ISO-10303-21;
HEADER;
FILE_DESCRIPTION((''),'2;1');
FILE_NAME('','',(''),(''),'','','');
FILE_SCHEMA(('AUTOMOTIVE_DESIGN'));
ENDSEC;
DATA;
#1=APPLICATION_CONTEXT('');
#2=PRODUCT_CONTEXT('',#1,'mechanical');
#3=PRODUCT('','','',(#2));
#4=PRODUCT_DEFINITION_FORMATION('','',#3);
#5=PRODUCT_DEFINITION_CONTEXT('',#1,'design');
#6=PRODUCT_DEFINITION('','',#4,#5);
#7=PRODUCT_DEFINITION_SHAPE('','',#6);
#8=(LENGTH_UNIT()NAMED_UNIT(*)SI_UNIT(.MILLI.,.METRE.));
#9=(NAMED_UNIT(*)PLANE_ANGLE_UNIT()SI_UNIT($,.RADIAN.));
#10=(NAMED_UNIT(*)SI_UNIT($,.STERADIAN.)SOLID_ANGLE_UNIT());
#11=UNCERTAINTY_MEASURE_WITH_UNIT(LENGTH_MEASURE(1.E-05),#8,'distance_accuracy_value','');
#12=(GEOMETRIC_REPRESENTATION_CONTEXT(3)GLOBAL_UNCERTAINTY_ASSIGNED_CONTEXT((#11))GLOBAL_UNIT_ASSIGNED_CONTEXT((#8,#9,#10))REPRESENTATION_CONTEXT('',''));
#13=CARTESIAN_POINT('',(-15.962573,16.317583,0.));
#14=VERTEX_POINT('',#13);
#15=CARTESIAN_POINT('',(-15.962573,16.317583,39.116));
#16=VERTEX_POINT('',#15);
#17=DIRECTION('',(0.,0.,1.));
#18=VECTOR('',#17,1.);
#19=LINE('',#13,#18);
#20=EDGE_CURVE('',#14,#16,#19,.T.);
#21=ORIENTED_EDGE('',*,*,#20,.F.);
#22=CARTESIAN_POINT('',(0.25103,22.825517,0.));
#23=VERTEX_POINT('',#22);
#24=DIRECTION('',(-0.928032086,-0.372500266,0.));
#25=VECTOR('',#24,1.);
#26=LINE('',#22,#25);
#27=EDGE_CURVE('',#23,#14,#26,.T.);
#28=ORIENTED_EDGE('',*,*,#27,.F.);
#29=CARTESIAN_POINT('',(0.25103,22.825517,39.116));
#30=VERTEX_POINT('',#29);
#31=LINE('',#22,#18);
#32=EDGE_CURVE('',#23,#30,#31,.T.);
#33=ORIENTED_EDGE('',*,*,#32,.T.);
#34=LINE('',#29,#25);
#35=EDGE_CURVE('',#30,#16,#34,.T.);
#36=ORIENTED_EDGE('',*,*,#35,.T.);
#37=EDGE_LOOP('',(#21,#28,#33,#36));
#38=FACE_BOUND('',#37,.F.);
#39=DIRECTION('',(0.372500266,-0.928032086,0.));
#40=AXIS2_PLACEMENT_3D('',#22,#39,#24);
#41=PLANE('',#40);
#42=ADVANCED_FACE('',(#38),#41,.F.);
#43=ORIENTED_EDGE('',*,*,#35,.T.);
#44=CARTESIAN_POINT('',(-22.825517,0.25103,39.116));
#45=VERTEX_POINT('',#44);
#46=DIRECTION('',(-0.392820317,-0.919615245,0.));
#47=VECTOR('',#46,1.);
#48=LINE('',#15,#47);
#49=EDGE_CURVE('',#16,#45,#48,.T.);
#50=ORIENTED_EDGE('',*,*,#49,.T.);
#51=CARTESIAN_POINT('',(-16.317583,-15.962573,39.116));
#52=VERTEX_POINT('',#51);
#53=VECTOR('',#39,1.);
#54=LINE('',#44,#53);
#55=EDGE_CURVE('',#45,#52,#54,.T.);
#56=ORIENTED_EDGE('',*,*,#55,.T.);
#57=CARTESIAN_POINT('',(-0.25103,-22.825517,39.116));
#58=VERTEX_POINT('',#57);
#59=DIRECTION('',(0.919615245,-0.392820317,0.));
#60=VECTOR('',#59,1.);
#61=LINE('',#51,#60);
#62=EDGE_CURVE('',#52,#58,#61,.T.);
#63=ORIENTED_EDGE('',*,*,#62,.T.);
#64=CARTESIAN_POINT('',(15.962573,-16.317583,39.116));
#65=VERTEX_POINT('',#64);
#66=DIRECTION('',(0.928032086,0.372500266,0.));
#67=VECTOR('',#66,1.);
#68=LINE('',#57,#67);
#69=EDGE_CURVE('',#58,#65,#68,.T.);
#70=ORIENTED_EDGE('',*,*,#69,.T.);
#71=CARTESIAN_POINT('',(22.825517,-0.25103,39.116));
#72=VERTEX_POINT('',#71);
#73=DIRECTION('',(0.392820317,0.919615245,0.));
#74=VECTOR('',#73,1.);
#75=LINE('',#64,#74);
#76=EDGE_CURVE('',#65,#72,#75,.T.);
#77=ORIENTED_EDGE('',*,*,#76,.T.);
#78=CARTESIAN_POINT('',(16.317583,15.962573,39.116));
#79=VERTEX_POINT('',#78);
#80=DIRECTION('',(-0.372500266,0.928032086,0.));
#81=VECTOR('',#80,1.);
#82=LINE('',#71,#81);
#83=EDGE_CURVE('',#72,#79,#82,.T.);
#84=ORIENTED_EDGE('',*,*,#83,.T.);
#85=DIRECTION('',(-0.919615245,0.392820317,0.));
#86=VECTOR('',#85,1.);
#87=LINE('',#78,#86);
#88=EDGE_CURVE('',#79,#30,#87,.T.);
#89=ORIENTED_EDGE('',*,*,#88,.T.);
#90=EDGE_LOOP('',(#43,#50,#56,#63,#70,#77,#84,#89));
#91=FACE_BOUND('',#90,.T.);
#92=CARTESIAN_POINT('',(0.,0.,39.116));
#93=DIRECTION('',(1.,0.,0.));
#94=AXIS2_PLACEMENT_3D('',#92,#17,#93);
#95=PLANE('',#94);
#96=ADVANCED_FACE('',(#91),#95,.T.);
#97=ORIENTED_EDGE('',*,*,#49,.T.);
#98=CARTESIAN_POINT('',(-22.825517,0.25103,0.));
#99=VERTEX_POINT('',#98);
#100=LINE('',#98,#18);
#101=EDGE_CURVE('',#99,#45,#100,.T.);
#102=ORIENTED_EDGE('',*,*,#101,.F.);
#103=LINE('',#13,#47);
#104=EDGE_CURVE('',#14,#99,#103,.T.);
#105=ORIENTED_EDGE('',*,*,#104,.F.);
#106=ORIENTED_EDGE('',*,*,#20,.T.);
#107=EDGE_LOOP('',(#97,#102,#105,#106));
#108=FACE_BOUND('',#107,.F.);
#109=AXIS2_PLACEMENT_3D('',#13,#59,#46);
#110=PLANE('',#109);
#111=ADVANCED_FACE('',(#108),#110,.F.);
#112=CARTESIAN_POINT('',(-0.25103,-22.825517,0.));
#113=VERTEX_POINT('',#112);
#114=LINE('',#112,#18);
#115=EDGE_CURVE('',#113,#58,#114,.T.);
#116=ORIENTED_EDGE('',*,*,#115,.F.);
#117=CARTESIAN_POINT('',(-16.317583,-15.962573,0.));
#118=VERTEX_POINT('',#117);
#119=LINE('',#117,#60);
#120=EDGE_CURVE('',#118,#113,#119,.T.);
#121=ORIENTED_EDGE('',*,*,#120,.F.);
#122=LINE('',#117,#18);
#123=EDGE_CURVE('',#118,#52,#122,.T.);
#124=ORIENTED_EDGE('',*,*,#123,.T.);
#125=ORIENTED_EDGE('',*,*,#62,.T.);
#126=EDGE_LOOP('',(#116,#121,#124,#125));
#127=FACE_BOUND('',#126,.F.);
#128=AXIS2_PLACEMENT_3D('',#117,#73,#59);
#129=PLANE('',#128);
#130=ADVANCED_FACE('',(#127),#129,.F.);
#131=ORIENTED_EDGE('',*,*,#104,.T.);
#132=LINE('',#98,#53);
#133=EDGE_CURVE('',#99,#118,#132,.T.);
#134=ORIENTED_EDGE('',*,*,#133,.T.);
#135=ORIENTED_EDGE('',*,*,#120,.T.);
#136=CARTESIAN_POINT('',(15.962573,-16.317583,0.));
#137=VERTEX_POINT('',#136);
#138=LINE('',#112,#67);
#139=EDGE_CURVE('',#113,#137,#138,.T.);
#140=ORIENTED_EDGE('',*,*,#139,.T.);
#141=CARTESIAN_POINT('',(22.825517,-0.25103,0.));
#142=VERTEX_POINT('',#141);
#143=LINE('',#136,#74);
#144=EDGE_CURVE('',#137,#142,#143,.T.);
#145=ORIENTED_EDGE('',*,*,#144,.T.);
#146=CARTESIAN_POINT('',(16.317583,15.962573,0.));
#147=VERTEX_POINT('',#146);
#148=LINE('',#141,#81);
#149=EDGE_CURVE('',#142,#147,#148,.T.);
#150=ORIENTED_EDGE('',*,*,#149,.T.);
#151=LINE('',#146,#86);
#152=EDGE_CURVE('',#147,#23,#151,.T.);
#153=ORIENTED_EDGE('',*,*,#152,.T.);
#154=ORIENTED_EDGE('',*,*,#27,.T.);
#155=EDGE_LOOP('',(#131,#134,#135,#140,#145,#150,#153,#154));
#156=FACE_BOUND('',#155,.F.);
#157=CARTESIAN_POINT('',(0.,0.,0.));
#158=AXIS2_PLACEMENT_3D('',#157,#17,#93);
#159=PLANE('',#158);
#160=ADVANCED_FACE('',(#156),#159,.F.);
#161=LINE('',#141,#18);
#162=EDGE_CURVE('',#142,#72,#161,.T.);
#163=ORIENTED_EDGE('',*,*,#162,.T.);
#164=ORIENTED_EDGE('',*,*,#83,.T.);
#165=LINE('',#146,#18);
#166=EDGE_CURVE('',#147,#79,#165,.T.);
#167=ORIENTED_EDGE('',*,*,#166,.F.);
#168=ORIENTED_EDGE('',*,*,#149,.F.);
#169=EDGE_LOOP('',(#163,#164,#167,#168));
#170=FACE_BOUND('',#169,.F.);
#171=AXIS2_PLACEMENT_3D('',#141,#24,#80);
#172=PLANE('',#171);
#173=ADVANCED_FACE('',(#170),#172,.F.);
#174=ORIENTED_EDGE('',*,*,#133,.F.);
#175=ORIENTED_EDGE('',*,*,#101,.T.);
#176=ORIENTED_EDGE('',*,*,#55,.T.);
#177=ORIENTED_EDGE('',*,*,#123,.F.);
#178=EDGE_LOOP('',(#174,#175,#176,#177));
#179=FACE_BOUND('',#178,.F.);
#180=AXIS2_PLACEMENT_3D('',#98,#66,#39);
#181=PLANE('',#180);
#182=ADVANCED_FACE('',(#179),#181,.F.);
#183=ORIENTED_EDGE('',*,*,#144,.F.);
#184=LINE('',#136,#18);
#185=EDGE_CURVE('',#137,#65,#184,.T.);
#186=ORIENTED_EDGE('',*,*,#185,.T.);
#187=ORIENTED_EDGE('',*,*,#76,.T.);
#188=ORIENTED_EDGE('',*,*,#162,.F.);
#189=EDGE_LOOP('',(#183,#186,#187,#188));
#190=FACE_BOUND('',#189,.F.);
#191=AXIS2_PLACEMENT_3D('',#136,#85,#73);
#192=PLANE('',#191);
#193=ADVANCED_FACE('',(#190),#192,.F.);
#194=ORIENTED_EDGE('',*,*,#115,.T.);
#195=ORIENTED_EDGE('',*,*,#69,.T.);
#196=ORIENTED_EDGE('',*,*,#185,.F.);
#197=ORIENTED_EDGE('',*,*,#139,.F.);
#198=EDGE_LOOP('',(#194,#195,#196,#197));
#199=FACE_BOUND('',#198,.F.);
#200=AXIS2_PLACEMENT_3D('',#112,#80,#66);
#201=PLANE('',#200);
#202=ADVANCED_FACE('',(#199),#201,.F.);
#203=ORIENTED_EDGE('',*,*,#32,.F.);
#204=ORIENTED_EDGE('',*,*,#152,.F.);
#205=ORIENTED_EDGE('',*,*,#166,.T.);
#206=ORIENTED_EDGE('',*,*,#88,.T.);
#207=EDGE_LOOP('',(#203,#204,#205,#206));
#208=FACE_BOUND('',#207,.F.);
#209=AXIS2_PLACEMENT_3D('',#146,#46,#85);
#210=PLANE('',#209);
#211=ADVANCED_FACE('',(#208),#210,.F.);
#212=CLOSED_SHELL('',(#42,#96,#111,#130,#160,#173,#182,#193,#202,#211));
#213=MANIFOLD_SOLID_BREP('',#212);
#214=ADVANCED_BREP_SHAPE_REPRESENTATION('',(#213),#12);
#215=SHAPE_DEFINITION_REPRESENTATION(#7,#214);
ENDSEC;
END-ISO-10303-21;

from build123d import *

# Parameters (mm, degrees)
F3_DEPTH = 39.116


# Not quite as in the source:
# - the program builds the solid bodies; features that only make, move or delete a surface that nothing else refers to are left out


with BuildPart() as f3:
    # F2 (on Top) → F3 (new body)
    with BuildSketch(Plane.XY):
        Polygon((22.8255171269, -0.2510304161), (16.317583254, 15.962572635), (0.2510304161, 22.8255171269), (-15.962572635, 16.317583254), (-22.8255171269, 0.2510304161), (-16.317583254, -15.962572635), (-0.2510304161, -22.8255171269), (15.962572635, -16.317583254), align=None)
    extrude(amount=F3_DEPTH)


solid = f3.part
